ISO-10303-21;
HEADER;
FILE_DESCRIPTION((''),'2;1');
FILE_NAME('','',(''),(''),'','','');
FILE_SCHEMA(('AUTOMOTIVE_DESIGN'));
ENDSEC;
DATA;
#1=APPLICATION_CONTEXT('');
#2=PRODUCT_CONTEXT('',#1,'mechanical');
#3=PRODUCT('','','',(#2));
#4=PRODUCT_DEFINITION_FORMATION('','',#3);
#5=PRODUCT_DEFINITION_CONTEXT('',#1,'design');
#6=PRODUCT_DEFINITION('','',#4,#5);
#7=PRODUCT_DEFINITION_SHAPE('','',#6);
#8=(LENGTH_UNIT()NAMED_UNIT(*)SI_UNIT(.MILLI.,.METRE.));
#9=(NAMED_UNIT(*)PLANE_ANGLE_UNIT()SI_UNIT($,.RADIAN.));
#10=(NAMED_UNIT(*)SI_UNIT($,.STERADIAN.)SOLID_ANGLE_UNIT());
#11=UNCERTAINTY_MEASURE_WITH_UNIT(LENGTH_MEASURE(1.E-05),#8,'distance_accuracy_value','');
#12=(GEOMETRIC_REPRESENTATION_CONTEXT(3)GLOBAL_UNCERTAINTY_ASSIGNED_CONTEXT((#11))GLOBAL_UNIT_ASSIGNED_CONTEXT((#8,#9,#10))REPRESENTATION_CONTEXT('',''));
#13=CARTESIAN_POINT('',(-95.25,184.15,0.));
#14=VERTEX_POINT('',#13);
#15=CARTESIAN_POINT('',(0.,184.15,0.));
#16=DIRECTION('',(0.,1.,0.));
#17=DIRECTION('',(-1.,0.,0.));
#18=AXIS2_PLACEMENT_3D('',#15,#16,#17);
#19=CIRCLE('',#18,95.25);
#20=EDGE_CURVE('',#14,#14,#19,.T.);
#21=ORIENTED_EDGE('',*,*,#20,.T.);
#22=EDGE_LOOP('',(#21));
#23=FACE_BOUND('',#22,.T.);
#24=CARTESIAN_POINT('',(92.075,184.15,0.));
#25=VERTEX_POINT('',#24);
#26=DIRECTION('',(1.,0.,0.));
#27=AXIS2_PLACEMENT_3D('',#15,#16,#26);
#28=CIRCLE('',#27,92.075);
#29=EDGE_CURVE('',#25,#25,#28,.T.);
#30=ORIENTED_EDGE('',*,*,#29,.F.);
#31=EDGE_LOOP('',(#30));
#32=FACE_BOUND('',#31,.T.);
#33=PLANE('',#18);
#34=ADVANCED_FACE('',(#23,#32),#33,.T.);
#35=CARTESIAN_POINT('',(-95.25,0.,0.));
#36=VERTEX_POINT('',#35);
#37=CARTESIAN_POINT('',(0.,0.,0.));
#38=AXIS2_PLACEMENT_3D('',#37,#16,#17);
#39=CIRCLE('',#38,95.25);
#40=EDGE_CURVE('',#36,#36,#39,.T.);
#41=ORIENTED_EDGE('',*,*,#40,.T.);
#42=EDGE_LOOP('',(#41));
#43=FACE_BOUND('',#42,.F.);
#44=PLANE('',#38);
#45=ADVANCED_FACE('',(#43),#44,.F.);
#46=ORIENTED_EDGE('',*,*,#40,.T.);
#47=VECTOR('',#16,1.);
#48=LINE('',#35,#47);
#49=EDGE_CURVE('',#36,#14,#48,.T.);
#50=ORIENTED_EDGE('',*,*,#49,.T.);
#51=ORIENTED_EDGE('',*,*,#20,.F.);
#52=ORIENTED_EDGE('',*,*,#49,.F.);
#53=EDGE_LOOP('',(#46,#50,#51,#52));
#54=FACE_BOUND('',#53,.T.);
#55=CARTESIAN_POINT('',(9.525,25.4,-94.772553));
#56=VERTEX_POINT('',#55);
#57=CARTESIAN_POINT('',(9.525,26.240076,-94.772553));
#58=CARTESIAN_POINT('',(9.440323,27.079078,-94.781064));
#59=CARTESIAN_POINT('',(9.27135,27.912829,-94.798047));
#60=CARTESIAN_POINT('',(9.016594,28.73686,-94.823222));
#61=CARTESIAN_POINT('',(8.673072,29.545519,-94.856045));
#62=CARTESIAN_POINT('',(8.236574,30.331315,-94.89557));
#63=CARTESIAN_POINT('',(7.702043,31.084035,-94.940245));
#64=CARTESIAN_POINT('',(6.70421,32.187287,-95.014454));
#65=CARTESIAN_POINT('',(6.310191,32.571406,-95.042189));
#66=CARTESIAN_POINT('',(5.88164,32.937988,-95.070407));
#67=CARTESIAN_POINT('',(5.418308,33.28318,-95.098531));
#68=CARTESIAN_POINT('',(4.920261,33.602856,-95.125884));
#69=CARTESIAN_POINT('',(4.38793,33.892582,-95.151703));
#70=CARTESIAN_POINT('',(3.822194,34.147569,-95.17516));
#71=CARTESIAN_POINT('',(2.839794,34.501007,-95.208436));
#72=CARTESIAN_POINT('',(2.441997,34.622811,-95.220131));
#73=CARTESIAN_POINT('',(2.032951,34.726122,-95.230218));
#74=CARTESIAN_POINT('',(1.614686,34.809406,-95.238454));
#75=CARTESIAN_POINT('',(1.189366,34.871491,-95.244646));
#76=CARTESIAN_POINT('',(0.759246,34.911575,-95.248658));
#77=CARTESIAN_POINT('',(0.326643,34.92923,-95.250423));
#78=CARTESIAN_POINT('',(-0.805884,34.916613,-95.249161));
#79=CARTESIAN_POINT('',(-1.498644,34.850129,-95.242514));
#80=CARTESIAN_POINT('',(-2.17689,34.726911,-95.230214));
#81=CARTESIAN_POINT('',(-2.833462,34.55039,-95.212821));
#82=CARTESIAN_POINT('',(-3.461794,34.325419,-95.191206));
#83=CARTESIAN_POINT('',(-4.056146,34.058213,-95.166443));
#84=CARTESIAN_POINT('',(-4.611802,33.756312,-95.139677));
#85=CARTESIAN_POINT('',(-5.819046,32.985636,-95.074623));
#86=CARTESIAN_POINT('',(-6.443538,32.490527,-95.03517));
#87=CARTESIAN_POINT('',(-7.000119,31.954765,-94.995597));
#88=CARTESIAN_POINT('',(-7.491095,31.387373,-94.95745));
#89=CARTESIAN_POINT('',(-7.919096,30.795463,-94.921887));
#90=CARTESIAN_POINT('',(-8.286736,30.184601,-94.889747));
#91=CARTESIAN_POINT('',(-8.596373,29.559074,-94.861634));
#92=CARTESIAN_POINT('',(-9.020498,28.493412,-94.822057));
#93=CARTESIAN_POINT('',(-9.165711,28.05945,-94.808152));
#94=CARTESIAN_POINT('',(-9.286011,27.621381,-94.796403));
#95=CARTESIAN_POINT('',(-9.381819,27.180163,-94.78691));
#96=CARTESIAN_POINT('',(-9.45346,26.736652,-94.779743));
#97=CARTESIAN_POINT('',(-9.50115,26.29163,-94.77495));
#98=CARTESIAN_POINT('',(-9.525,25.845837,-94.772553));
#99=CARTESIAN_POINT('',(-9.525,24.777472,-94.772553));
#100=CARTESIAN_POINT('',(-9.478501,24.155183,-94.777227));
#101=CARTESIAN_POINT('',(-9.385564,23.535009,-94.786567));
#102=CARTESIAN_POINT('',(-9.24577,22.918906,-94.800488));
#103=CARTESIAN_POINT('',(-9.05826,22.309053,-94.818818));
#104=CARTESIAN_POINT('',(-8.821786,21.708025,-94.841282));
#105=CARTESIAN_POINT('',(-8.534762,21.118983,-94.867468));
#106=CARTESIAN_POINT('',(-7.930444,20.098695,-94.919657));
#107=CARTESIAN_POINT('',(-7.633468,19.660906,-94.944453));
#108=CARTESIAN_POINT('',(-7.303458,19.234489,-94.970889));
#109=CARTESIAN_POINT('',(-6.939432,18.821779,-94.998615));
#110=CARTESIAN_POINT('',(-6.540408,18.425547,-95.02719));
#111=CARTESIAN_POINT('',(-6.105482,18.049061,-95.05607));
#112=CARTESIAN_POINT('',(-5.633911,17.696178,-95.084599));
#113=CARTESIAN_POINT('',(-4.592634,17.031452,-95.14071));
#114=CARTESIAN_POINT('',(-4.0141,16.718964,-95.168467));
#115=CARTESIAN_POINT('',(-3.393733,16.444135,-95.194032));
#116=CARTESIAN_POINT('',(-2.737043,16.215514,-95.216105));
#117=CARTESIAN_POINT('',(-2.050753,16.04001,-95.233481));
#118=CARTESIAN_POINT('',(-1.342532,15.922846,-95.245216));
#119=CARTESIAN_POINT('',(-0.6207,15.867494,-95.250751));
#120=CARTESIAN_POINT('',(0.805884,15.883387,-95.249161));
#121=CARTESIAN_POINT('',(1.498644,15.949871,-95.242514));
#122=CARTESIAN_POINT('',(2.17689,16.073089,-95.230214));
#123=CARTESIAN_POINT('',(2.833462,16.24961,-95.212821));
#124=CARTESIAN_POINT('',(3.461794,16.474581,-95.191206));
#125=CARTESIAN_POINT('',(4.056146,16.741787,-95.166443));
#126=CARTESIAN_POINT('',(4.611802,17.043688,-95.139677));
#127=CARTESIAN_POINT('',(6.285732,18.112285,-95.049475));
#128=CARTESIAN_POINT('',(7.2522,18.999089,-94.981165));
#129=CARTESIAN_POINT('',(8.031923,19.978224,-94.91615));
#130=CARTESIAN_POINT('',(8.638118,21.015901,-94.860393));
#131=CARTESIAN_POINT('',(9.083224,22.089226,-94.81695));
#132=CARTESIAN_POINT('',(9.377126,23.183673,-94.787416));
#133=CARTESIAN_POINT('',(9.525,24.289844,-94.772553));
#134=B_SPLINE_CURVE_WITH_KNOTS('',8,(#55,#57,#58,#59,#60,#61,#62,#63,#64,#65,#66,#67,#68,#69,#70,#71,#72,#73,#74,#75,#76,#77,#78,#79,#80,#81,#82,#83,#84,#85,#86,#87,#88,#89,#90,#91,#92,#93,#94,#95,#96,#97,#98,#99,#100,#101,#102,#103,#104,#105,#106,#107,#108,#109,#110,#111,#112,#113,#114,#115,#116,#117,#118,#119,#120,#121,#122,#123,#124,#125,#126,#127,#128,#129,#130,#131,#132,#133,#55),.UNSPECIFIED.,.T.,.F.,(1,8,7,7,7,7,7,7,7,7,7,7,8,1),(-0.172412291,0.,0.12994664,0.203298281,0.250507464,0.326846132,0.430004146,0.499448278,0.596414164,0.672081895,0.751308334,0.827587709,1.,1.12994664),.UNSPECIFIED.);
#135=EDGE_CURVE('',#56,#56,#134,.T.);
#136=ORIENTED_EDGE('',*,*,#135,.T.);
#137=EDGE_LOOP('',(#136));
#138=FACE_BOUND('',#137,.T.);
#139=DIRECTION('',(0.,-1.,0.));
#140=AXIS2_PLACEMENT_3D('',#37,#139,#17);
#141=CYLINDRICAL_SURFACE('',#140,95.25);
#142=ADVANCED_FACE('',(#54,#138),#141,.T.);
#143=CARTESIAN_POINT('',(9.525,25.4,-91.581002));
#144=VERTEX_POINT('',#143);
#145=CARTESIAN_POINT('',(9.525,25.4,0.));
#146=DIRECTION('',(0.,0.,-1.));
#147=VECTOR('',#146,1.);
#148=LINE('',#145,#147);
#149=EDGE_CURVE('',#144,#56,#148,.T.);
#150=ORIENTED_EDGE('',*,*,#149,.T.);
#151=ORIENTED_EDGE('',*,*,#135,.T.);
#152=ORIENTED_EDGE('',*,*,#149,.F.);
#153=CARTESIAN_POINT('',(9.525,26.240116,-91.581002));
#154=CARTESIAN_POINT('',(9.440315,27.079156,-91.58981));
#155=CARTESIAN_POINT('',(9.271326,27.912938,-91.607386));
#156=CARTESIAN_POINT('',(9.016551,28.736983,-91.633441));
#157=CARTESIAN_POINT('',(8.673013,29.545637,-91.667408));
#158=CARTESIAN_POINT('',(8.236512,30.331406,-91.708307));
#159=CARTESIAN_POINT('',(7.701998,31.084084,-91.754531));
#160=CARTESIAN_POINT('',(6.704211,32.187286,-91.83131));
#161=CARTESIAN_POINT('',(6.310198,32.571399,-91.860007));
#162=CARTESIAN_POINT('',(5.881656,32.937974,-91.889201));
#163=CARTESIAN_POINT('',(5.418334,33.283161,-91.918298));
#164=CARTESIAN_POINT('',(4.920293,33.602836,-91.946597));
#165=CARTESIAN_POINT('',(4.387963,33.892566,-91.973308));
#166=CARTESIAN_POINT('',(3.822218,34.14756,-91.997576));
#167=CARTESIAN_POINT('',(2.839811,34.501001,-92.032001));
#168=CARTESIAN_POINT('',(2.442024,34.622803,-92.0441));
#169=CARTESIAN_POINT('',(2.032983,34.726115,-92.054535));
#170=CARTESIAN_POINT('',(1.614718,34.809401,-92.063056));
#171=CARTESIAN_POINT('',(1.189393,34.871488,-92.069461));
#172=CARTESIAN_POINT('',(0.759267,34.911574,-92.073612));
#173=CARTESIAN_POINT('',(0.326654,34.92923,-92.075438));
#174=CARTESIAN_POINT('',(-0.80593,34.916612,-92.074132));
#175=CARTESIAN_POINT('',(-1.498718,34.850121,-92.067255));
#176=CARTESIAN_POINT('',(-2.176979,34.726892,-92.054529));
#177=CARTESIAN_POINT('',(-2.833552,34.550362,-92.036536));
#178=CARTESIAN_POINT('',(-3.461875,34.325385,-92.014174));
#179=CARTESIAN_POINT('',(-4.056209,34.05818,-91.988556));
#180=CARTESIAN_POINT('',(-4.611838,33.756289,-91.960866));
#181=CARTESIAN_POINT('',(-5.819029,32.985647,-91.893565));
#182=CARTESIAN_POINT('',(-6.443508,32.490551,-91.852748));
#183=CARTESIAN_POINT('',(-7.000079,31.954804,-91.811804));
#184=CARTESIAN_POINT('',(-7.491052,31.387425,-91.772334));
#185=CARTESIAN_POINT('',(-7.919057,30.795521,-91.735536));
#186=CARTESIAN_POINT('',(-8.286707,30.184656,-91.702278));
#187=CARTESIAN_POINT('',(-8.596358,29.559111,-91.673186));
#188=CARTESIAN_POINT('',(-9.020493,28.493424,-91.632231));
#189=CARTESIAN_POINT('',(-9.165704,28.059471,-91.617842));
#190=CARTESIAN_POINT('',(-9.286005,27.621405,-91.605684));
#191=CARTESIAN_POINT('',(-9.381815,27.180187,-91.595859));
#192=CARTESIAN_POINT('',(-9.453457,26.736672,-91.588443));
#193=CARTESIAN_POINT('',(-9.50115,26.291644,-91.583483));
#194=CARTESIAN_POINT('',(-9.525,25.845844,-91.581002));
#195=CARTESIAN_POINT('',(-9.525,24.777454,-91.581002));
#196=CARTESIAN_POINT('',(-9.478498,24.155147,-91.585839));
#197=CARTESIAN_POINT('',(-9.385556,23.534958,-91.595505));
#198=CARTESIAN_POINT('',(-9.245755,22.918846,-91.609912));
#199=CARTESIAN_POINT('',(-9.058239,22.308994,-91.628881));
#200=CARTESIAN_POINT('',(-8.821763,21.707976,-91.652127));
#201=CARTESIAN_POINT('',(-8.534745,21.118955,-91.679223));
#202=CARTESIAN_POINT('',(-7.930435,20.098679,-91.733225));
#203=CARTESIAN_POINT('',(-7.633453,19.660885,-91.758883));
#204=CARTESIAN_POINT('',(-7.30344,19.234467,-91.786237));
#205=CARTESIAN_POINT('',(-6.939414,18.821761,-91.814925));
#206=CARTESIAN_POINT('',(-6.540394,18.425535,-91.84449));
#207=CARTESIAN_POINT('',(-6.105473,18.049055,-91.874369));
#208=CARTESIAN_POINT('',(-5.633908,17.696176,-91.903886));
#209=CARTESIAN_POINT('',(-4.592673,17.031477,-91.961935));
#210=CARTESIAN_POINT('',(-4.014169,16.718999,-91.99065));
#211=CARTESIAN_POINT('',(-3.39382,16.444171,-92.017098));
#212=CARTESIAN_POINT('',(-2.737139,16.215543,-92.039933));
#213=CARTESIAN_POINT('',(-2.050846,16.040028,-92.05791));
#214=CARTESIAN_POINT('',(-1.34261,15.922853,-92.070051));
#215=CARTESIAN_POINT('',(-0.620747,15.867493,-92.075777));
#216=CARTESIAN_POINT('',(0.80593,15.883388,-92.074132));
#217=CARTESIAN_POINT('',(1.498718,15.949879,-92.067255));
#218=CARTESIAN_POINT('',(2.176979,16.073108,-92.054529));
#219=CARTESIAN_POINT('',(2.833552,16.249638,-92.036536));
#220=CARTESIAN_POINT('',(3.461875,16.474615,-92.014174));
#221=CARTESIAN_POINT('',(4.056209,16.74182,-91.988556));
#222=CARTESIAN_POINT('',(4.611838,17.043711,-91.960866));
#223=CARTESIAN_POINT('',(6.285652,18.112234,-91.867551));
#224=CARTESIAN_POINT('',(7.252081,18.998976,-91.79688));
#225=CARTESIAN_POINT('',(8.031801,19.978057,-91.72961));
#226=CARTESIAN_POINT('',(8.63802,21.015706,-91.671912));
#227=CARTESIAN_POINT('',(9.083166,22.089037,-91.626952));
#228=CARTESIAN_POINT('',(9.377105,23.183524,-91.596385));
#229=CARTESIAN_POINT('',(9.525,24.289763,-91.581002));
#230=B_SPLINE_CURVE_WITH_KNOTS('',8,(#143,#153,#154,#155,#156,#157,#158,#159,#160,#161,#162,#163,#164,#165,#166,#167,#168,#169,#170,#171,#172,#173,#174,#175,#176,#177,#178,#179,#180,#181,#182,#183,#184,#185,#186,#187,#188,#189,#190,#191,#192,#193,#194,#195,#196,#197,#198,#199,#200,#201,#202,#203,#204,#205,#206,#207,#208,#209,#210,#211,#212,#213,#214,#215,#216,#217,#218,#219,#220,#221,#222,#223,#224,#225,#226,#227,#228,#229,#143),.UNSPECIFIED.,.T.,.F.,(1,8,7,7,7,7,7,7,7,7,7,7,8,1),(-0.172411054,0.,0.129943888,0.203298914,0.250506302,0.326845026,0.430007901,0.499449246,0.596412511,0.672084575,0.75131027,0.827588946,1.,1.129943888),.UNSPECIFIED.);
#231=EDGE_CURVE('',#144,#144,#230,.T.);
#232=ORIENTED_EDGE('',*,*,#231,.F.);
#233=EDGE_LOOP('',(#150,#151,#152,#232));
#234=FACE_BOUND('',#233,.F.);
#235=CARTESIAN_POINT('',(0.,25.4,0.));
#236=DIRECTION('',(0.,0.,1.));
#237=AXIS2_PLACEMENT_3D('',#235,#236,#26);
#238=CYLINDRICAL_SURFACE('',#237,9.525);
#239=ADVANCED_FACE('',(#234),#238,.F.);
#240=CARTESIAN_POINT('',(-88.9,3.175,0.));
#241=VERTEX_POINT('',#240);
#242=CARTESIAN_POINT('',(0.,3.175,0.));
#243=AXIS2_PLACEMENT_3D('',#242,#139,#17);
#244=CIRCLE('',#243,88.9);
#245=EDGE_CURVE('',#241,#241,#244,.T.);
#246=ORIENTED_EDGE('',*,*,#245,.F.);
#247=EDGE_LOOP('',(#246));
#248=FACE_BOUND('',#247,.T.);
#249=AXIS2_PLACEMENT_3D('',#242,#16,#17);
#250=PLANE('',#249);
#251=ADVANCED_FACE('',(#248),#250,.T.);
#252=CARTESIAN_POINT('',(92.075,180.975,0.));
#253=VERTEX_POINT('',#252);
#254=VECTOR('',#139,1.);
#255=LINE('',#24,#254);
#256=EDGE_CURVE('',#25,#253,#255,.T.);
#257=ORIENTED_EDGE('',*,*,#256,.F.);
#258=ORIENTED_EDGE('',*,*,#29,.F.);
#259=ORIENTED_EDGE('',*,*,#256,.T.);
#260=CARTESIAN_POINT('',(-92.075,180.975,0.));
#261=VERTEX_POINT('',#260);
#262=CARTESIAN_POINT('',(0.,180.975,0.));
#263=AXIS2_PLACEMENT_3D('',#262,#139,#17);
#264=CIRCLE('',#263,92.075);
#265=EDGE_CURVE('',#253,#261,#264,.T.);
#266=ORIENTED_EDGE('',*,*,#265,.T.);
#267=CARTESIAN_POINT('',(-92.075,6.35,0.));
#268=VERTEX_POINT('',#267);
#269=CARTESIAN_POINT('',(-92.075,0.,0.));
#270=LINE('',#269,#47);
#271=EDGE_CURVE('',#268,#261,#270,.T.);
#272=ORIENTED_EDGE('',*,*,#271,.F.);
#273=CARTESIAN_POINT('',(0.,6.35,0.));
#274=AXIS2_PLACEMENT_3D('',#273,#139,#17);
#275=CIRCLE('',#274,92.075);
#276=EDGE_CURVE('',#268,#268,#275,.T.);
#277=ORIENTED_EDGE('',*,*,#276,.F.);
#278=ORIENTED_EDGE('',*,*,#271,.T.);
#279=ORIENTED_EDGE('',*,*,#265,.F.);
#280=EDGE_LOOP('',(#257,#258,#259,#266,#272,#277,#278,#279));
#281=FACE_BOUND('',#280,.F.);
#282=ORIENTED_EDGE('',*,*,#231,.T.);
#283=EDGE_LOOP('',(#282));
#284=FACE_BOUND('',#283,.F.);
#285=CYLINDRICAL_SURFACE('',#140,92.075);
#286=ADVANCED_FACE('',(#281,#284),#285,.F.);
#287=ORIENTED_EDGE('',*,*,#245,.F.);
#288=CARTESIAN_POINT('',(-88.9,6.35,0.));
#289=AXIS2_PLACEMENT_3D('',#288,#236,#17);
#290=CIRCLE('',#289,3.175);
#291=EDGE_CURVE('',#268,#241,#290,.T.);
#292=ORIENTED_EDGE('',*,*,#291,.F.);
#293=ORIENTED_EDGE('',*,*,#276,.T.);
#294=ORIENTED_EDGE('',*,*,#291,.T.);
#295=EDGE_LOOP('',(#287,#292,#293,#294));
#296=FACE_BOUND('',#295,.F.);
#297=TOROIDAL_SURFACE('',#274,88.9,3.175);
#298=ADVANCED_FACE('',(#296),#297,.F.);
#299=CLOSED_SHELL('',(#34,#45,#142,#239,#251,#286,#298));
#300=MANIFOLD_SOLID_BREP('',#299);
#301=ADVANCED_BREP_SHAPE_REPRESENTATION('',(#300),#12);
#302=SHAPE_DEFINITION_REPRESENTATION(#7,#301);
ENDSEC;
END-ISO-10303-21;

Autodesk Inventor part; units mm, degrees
ref_plane "YZ Plane" through (0, 0, 0) normal (1, 0, 0) x (0, 1, 0)
ref_plane "XZ Plane" through (0, 0, 0) normal (0, 1, 0) x (-1, 0, 0)
ref_plane "XY Plane" through (0, 0, 0) normal (0, 0, 1) x (1, 0, 0)
sketch "Sketch1" plane through (0, 0, 0) normal (0, 1, 0) x (-1, 0, 0)
  circle A0 centre (0, 0) radius 95.25
  dimension "d0" = 190.5
extrude "Extrusion1" add sketch "Sketch1" along normal blind 184.15
shell "Shell1" thickness 3.175 removed faces 0
sketch "Sketch2" plane through (0, 184.15, 0) normal (0, 1, 0) x (1, 0, 0)
  circle A0 centre (0, 0) radius 92.075
  circle A1 centre (0, 0) radius 95.25 projected
  dimension "d4" = 3.175
extrude "Extrusion2" cut sketch "Sketch2" against normal up to next contours A0
fillet "Fillet1" radius 3.175 1 edges at (92.075, 3.175, 0)
sketch "Sketch3" plane through (0, -30.1625, 0) normal (0, 0, 1) x (1, 0, 0)
  circle A0 centre (0, 55.5625) radius 9.525
  line L0 (120.65, 30.1625) -> (-120.65, 30.1625)
  point P0 (0, 30.1625)
  point P1 (0, 30.1625)
  point P2 (0, 30.1625)
  dimension "d12" = 19.05
  dimension "d11" = 25.4
  dimension "d16" = 0
extrude "Extrusion3" cut sketch "Sketch3" against normal through all
equation "\"d4\" = d3"
equation "\"d7\" = d3"
equation "\"d3\" = 3.175"
properties part number "HP-01" material "Aluminum 6061"
